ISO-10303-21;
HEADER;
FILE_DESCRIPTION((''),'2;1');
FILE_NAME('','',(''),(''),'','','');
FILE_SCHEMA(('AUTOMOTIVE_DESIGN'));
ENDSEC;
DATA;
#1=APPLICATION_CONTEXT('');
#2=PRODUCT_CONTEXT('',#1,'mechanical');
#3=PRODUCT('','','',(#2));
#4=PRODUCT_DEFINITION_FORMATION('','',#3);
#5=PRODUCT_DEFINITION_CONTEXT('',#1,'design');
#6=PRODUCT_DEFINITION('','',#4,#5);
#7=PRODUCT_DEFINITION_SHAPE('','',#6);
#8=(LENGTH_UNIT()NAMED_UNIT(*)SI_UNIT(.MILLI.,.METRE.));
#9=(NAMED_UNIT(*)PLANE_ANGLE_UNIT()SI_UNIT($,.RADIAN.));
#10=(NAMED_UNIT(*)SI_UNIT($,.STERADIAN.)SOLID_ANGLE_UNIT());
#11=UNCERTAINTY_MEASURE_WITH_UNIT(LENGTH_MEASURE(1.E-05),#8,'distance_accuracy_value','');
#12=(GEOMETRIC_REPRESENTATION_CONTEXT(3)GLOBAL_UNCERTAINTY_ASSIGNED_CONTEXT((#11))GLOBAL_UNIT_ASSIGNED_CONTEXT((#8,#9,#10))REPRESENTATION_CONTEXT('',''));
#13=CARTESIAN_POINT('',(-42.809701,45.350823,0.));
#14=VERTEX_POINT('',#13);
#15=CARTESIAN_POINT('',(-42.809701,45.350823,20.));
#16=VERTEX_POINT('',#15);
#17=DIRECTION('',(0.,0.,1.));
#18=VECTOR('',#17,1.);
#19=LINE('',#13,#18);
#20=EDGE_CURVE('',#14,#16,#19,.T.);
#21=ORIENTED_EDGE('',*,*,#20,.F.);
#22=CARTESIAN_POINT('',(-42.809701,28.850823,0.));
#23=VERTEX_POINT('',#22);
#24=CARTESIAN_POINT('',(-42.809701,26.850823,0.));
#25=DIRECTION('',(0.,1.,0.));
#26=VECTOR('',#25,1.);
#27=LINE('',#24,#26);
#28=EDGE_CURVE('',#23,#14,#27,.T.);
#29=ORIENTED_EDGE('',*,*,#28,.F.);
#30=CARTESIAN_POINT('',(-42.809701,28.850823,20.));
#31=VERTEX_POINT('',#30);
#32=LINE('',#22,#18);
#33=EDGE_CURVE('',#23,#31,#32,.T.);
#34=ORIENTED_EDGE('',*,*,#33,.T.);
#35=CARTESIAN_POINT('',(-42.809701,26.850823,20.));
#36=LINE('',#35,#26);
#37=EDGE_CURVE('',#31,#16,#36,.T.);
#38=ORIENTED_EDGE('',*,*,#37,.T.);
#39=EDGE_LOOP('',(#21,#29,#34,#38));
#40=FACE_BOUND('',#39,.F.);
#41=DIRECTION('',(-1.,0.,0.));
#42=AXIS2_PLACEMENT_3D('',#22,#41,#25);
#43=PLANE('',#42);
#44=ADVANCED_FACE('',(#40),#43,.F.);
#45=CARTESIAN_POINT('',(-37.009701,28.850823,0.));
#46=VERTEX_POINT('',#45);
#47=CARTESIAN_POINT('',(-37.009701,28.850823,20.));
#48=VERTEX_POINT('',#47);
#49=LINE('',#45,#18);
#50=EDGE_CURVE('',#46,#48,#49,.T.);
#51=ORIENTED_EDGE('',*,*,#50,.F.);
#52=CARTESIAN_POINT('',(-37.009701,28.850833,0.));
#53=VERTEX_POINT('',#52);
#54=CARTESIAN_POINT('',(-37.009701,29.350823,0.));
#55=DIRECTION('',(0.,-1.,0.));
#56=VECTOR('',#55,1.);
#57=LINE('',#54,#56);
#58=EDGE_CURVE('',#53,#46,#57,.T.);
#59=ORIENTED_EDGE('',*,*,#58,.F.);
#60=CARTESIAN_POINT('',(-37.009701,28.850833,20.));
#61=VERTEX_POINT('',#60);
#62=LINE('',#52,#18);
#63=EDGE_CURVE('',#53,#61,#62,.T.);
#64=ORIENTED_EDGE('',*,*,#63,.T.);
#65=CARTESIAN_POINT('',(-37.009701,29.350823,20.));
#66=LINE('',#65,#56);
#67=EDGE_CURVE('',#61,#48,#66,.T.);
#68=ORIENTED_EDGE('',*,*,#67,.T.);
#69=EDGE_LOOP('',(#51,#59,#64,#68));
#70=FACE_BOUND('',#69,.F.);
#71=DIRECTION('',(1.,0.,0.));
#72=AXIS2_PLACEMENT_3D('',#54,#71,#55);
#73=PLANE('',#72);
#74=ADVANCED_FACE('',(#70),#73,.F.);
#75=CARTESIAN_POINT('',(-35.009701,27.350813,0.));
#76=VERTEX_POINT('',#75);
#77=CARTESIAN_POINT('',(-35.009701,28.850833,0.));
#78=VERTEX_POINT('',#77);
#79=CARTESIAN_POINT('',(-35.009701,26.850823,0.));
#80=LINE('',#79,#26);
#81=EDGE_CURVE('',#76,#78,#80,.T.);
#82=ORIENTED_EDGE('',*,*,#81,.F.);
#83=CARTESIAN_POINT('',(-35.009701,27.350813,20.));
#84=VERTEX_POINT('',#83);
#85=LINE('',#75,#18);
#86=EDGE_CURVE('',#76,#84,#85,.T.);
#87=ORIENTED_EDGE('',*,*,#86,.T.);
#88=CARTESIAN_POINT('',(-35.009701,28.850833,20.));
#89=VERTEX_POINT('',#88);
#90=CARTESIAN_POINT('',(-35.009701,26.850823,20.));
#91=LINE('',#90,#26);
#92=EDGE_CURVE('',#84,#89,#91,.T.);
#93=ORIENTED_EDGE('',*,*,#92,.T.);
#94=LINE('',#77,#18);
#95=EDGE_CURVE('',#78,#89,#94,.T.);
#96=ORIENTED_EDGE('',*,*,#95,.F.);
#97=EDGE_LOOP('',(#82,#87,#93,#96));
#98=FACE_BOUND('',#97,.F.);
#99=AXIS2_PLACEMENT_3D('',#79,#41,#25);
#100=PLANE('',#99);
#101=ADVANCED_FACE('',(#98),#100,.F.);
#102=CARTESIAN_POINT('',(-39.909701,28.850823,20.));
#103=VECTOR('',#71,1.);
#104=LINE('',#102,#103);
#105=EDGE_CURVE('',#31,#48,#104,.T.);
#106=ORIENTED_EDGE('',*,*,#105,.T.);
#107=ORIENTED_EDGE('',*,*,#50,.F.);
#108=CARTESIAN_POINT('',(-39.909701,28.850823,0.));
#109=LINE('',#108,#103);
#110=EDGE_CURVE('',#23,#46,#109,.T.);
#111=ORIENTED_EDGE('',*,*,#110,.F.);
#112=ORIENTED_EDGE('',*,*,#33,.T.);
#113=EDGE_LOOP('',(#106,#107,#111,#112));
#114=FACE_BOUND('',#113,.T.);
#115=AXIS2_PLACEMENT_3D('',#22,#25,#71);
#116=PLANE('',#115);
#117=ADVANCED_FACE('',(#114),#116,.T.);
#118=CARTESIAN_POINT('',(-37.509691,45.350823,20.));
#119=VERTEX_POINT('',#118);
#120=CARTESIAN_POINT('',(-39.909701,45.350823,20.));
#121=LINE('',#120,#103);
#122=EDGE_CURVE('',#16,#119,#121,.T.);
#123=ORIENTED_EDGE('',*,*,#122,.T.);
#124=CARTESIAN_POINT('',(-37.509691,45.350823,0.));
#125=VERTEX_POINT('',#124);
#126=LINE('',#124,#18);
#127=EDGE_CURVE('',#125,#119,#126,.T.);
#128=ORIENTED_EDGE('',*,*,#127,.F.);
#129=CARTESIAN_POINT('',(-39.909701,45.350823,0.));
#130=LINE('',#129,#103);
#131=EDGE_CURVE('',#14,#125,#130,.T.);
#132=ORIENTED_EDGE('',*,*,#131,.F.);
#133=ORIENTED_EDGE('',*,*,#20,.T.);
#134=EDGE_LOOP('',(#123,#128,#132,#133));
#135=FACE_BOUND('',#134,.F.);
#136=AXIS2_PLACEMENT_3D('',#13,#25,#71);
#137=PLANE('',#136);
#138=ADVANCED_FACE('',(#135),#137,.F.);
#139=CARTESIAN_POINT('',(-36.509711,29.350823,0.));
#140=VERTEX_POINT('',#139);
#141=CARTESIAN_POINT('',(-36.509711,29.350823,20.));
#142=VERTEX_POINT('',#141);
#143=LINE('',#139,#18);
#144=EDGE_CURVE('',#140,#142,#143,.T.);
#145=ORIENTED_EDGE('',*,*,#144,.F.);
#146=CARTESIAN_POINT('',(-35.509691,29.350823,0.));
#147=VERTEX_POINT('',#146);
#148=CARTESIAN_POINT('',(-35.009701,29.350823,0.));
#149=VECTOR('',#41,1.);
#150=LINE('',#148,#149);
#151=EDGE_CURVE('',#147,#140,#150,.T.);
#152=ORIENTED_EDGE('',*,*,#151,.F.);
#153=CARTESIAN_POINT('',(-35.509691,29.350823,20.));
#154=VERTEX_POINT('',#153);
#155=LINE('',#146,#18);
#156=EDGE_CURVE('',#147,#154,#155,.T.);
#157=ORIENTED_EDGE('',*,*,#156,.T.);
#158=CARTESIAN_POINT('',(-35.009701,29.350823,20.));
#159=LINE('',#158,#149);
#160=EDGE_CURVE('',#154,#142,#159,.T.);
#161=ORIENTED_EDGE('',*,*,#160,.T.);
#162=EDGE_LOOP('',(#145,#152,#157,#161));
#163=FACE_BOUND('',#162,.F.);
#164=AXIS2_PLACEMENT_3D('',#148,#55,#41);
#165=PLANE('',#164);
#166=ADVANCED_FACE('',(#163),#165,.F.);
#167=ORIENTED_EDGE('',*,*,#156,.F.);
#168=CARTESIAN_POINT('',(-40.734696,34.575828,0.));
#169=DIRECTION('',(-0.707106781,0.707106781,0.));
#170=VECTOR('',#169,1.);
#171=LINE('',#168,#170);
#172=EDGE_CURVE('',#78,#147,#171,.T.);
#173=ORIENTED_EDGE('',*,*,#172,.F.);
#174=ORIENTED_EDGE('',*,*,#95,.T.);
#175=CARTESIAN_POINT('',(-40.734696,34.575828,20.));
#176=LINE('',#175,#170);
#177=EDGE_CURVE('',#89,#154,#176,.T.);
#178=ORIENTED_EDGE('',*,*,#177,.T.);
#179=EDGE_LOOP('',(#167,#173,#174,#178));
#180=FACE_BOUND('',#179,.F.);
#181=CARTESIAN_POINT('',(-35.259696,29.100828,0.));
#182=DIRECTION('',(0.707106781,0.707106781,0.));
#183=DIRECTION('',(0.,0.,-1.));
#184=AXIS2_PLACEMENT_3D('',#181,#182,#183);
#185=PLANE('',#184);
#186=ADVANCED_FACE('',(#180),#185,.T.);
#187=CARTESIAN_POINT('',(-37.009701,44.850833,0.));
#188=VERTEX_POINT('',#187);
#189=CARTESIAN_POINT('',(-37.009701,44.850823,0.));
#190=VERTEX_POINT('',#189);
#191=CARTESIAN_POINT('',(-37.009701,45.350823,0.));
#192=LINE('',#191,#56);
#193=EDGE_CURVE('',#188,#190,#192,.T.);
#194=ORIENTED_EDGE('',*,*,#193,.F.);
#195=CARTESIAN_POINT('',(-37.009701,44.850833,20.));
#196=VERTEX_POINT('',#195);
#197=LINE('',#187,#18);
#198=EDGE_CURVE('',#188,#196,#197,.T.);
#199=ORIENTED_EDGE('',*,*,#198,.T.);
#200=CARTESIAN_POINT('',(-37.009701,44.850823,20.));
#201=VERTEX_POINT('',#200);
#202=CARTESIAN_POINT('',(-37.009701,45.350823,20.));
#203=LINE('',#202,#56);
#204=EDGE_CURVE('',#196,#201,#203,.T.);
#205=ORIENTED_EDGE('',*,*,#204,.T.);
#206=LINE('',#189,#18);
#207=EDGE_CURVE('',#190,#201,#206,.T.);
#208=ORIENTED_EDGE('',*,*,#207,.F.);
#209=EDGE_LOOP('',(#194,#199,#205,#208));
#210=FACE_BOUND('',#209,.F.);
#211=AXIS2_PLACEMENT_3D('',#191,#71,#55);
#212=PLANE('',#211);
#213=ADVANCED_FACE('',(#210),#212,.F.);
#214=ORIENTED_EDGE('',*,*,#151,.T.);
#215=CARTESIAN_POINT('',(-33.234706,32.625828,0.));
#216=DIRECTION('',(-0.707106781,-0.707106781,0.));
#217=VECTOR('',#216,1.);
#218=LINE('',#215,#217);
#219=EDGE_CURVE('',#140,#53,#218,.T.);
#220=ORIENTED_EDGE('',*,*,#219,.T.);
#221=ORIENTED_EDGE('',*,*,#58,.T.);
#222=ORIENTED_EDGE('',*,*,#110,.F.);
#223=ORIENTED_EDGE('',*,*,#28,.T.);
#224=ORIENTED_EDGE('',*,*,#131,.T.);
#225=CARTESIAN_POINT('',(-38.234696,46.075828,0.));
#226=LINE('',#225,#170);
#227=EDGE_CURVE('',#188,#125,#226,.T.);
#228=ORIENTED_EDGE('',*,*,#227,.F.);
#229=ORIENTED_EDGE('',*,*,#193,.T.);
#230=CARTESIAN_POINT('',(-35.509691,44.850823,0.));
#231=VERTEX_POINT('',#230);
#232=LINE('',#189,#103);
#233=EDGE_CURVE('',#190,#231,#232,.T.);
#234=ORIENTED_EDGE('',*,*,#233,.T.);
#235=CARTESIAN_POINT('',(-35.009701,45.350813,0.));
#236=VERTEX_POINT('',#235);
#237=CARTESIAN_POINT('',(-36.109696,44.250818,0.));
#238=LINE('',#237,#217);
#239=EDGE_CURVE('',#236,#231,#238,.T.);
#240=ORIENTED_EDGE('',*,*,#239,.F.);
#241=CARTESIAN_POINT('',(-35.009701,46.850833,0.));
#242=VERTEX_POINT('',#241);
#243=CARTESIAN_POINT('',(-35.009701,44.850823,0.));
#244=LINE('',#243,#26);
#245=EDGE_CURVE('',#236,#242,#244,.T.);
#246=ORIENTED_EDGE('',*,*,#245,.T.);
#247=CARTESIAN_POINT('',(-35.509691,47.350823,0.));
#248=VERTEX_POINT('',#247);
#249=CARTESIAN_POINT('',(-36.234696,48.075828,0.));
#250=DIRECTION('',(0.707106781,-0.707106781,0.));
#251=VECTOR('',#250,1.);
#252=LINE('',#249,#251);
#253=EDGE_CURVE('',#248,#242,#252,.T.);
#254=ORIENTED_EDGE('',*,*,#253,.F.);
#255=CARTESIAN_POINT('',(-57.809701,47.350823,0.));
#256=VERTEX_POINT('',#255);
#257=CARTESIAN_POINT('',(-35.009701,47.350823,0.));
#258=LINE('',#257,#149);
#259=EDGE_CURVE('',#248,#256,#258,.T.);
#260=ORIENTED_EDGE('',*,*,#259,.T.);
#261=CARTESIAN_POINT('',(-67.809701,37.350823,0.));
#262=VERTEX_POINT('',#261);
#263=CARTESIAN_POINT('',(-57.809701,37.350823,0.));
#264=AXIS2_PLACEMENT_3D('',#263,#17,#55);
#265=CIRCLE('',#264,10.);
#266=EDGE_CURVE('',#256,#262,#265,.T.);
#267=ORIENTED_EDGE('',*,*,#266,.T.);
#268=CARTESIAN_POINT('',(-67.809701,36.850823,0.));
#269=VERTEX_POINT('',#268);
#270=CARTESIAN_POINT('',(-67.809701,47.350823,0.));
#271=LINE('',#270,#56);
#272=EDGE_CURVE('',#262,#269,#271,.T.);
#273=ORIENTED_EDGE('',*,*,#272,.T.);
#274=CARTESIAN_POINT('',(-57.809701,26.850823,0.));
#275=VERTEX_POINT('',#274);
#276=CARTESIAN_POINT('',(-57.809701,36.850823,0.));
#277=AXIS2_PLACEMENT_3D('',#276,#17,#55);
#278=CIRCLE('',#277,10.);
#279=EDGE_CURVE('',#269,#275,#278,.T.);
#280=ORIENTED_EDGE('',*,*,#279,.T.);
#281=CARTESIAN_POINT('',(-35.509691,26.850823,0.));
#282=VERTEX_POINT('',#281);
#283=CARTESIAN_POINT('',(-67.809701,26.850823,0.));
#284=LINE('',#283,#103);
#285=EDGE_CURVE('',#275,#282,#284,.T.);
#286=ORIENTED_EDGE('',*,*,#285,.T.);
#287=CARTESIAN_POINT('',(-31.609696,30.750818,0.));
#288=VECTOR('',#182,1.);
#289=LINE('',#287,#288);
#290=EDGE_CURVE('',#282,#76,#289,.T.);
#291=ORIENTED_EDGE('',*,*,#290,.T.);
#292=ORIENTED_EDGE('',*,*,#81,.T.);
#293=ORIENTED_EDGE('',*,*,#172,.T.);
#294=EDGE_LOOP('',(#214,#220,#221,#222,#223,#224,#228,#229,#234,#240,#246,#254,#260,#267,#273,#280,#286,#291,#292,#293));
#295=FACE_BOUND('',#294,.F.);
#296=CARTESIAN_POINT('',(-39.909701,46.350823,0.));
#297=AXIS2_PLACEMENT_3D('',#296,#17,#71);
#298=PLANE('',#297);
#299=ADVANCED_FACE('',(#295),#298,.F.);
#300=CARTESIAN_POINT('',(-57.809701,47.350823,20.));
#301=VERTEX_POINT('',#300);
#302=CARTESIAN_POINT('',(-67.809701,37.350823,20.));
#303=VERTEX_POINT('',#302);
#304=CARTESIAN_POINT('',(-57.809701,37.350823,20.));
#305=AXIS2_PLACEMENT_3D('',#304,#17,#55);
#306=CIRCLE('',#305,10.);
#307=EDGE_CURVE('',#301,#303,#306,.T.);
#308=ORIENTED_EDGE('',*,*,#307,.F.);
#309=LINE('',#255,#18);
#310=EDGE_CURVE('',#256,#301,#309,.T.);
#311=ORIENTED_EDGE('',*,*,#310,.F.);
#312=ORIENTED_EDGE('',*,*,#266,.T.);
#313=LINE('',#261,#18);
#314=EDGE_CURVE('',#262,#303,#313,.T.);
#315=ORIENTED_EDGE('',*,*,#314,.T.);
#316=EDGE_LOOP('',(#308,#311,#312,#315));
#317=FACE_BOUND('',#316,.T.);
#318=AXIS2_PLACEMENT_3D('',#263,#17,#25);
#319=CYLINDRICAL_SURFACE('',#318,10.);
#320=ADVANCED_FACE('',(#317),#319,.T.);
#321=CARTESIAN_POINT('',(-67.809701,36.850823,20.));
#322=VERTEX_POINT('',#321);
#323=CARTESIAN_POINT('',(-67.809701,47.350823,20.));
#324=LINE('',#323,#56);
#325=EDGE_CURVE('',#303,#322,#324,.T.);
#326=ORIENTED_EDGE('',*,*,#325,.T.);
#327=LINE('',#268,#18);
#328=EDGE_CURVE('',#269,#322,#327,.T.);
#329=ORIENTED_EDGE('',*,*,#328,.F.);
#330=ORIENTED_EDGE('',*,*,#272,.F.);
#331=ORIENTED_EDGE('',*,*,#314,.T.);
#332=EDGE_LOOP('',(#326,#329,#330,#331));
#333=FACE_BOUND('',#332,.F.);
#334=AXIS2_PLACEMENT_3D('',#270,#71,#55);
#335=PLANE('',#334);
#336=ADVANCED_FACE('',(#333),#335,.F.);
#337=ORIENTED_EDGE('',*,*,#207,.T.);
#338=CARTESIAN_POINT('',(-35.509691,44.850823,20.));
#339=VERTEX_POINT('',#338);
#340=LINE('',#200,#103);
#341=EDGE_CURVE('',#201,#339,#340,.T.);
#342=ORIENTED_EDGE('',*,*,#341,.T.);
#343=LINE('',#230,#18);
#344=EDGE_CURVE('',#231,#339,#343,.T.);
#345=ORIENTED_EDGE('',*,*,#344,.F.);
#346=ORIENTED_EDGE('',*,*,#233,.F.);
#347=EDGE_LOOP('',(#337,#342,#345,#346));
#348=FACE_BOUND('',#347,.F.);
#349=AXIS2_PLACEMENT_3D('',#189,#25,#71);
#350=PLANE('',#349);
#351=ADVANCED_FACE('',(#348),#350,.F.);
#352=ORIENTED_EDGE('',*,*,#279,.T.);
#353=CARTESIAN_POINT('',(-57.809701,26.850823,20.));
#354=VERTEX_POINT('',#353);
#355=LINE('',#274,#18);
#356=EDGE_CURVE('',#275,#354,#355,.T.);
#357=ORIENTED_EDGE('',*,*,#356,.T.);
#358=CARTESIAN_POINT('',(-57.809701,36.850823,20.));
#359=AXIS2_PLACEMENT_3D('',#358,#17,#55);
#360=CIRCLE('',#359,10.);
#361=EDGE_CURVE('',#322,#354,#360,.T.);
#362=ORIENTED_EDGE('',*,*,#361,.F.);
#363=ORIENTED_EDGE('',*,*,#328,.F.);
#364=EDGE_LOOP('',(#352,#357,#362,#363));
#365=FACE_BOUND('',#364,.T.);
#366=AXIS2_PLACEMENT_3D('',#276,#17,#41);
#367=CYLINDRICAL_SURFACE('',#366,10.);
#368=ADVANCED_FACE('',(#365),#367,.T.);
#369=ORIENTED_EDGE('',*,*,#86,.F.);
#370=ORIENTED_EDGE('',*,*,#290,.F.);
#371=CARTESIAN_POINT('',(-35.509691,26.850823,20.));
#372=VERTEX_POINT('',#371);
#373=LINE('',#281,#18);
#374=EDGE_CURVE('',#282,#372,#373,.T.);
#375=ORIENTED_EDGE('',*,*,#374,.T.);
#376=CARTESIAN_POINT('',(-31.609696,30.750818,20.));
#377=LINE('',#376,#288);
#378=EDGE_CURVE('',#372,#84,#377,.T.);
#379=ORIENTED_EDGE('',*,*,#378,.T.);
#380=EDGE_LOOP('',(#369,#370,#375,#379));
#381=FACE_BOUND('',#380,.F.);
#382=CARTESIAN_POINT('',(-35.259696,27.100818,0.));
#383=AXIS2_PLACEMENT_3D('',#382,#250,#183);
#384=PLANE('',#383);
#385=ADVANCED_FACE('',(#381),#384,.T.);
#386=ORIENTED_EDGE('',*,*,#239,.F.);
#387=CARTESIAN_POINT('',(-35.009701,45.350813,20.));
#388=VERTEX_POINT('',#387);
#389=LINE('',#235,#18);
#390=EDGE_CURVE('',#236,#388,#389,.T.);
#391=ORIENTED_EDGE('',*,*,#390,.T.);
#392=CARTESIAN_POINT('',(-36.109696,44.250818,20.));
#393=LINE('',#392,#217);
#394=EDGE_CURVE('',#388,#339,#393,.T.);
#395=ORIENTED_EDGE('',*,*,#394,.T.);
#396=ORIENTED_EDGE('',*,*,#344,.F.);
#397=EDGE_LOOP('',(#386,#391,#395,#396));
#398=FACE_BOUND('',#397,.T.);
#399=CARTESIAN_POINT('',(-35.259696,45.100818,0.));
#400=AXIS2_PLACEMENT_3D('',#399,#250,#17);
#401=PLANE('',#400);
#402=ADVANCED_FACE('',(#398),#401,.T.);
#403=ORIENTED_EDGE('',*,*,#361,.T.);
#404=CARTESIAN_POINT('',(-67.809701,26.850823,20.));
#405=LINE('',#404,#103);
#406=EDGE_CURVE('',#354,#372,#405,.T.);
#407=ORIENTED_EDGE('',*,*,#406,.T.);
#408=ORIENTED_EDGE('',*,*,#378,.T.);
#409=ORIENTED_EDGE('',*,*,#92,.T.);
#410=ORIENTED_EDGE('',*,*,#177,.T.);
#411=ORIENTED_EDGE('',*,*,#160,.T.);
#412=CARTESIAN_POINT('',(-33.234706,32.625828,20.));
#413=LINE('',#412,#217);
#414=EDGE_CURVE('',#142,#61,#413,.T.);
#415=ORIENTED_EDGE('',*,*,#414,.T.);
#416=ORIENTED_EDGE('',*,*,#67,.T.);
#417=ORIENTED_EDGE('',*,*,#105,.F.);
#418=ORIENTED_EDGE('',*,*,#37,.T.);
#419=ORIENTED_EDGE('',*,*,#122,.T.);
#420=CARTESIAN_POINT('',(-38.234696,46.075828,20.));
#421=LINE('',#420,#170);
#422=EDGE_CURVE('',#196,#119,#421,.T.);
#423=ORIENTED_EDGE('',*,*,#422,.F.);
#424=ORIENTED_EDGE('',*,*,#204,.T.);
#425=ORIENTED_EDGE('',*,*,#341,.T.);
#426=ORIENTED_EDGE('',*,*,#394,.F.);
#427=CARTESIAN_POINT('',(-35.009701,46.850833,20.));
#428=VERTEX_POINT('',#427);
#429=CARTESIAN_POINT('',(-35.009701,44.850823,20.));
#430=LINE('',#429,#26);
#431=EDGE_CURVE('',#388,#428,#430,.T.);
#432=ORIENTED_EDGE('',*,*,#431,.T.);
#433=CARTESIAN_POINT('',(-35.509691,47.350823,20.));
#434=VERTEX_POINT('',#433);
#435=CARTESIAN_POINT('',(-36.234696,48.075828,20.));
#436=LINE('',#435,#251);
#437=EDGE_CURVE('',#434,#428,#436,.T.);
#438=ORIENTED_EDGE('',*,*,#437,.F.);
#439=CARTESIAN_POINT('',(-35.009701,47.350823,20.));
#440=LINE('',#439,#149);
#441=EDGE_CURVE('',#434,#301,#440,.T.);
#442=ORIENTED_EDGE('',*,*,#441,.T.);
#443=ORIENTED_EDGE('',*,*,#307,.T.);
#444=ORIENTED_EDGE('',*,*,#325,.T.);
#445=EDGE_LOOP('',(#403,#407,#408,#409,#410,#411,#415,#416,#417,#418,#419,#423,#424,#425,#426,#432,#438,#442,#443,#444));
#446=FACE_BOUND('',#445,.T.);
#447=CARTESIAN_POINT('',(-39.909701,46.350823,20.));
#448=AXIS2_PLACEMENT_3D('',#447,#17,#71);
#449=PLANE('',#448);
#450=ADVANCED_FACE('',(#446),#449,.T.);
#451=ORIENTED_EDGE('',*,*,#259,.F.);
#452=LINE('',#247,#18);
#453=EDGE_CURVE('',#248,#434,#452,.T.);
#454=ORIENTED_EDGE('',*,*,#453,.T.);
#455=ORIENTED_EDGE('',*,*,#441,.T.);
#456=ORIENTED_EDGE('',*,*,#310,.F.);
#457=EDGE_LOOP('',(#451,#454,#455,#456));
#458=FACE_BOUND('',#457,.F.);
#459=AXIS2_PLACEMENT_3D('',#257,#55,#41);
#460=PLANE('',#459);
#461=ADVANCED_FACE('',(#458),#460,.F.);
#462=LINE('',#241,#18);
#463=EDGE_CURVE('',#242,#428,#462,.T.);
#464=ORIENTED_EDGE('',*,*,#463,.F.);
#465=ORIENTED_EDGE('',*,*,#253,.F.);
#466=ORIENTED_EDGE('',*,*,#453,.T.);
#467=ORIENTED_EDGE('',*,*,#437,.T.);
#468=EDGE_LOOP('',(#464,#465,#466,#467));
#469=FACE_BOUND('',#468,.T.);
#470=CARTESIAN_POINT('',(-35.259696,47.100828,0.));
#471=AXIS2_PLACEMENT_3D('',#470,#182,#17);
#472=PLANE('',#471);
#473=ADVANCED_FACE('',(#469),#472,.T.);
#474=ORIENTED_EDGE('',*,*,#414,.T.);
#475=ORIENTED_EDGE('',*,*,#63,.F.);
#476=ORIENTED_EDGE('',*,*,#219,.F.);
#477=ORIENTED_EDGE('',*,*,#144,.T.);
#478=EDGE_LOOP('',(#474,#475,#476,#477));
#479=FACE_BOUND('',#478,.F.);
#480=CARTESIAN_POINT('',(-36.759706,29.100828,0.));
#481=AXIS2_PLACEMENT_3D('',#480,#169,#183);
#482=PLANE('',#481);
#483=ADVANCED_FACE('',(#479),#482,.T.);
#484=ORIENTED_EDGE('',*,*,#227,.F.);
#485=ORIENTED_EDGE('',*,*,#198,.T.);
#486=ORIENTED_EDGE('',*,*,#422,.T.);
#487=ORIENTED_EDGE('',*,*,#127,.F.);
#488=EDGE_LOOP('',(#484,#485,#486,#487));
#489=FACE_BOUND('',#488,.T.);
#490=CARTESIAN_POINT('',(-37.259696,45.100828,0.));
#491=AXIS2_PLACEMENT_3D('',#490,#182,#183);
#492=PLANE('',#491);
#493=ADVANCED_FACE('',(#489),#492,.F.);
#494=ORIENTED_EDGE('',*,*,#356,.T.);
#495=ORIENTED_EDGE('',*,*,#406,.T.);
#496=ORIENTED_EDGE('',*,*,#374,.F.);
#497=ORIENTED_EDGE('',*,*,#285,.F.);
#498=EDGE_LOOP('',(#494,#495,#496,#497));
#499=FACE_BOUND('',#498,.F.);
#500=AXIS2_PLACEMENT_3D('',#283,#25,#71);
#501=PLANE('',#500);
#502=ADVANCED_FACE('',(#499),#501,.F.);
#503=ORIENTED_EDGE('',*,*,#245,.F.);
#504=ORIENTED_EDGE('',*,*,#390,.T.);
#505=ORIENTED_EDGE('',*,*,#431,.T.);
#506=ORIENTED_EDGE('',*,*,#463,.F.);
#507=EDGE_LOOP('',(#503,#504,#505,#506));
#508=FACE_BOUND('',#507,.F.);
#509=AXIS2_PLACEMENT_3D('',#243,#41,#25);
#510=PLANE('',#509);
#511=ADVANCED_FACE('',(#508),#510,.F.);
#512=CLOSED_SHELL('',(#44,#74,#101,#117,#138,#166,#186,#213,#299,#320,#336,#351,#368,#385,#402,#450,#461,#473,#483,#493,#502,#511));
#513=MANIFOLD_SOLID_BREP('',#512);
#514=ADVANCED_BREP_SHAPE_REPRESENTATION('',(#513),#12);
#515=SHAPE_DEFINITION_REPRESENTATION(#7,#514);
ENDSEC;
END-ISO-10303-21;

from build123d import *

# Parameters (mm, degrees)
F0_W     = 5.8
F0_H     = 2
F1_DEPTH = 20
F2_R     = 10
F3_SIZE  = 0.49999


# Not quite as in the source:
# - a fillet or chamfer is up to 0.001 mm smaller than in the source, because OpenCascade refuses the exact size


with BuildPart() as f1:
    # F0 (on Top) → F1 (new body)
    with BuildSketch(Plane.XY):
        with Locations((-39.9097009659, 46.350823313)):
            Rectangle(F0_W, F0_H)
        Polygon((-42.8097009659, 45.350823313), (-42.8097009659, 47.350823313), (-67.8097009659, 47.350823313), (-67.8097009659, 26.850823313), (-42.8097009659, 26.850823313), (-42.8097009659, 28.850823313), align=None)
        Polygon((-35.0097009659, 47.350823313), (-37.0097009659, 47.350823313), (-37.0097009659, 45.350823313), (-37.0097009659, 44.850823313), (-35.0097009659, 44.850823313), align=None)
        with Locations((-39.9097009659, 27.850823313)):
            Rectangle(F0_W, F0_H)
        Polygon((-37.0097009659, 29.350823313), (-37.0097009659, 28.850823313), (-37.0097009659, 26.850823313), (-35.0097009659, 26.850823313), (-35.0097009659, 29.350823313), align=None)
    extrude(amount=F1_DEPTH)

    # F2
    f2_edges = [f1.edges().sort_by_distance(p)[0] for p in [
        (-67.809701, 47.350823, 10),
        (-67.809701, 26.850823, 10),
    ]]
    fillet(f2_edges, radius=F2_R)

    # F3 (size 0.5 in the source; OpenCascade refuses exactly that, so slightly less here)
    f3_edges = [f1.edges().sort_by_distance(p)[0] for p in [
        (-35.009701, 47.350823, 10),
        (-35.009701, 44.850823, 10),
        (-35.009701, 29.350823, 10),
        (-35.009701, 26.850823, 10),
        (-37.009701, 29.350823, 10),
        (-37.009701, 45.350823, 10),
    ]]
    chamfer(f3_edges, length=F3_SIZE)


solid = f1.part
